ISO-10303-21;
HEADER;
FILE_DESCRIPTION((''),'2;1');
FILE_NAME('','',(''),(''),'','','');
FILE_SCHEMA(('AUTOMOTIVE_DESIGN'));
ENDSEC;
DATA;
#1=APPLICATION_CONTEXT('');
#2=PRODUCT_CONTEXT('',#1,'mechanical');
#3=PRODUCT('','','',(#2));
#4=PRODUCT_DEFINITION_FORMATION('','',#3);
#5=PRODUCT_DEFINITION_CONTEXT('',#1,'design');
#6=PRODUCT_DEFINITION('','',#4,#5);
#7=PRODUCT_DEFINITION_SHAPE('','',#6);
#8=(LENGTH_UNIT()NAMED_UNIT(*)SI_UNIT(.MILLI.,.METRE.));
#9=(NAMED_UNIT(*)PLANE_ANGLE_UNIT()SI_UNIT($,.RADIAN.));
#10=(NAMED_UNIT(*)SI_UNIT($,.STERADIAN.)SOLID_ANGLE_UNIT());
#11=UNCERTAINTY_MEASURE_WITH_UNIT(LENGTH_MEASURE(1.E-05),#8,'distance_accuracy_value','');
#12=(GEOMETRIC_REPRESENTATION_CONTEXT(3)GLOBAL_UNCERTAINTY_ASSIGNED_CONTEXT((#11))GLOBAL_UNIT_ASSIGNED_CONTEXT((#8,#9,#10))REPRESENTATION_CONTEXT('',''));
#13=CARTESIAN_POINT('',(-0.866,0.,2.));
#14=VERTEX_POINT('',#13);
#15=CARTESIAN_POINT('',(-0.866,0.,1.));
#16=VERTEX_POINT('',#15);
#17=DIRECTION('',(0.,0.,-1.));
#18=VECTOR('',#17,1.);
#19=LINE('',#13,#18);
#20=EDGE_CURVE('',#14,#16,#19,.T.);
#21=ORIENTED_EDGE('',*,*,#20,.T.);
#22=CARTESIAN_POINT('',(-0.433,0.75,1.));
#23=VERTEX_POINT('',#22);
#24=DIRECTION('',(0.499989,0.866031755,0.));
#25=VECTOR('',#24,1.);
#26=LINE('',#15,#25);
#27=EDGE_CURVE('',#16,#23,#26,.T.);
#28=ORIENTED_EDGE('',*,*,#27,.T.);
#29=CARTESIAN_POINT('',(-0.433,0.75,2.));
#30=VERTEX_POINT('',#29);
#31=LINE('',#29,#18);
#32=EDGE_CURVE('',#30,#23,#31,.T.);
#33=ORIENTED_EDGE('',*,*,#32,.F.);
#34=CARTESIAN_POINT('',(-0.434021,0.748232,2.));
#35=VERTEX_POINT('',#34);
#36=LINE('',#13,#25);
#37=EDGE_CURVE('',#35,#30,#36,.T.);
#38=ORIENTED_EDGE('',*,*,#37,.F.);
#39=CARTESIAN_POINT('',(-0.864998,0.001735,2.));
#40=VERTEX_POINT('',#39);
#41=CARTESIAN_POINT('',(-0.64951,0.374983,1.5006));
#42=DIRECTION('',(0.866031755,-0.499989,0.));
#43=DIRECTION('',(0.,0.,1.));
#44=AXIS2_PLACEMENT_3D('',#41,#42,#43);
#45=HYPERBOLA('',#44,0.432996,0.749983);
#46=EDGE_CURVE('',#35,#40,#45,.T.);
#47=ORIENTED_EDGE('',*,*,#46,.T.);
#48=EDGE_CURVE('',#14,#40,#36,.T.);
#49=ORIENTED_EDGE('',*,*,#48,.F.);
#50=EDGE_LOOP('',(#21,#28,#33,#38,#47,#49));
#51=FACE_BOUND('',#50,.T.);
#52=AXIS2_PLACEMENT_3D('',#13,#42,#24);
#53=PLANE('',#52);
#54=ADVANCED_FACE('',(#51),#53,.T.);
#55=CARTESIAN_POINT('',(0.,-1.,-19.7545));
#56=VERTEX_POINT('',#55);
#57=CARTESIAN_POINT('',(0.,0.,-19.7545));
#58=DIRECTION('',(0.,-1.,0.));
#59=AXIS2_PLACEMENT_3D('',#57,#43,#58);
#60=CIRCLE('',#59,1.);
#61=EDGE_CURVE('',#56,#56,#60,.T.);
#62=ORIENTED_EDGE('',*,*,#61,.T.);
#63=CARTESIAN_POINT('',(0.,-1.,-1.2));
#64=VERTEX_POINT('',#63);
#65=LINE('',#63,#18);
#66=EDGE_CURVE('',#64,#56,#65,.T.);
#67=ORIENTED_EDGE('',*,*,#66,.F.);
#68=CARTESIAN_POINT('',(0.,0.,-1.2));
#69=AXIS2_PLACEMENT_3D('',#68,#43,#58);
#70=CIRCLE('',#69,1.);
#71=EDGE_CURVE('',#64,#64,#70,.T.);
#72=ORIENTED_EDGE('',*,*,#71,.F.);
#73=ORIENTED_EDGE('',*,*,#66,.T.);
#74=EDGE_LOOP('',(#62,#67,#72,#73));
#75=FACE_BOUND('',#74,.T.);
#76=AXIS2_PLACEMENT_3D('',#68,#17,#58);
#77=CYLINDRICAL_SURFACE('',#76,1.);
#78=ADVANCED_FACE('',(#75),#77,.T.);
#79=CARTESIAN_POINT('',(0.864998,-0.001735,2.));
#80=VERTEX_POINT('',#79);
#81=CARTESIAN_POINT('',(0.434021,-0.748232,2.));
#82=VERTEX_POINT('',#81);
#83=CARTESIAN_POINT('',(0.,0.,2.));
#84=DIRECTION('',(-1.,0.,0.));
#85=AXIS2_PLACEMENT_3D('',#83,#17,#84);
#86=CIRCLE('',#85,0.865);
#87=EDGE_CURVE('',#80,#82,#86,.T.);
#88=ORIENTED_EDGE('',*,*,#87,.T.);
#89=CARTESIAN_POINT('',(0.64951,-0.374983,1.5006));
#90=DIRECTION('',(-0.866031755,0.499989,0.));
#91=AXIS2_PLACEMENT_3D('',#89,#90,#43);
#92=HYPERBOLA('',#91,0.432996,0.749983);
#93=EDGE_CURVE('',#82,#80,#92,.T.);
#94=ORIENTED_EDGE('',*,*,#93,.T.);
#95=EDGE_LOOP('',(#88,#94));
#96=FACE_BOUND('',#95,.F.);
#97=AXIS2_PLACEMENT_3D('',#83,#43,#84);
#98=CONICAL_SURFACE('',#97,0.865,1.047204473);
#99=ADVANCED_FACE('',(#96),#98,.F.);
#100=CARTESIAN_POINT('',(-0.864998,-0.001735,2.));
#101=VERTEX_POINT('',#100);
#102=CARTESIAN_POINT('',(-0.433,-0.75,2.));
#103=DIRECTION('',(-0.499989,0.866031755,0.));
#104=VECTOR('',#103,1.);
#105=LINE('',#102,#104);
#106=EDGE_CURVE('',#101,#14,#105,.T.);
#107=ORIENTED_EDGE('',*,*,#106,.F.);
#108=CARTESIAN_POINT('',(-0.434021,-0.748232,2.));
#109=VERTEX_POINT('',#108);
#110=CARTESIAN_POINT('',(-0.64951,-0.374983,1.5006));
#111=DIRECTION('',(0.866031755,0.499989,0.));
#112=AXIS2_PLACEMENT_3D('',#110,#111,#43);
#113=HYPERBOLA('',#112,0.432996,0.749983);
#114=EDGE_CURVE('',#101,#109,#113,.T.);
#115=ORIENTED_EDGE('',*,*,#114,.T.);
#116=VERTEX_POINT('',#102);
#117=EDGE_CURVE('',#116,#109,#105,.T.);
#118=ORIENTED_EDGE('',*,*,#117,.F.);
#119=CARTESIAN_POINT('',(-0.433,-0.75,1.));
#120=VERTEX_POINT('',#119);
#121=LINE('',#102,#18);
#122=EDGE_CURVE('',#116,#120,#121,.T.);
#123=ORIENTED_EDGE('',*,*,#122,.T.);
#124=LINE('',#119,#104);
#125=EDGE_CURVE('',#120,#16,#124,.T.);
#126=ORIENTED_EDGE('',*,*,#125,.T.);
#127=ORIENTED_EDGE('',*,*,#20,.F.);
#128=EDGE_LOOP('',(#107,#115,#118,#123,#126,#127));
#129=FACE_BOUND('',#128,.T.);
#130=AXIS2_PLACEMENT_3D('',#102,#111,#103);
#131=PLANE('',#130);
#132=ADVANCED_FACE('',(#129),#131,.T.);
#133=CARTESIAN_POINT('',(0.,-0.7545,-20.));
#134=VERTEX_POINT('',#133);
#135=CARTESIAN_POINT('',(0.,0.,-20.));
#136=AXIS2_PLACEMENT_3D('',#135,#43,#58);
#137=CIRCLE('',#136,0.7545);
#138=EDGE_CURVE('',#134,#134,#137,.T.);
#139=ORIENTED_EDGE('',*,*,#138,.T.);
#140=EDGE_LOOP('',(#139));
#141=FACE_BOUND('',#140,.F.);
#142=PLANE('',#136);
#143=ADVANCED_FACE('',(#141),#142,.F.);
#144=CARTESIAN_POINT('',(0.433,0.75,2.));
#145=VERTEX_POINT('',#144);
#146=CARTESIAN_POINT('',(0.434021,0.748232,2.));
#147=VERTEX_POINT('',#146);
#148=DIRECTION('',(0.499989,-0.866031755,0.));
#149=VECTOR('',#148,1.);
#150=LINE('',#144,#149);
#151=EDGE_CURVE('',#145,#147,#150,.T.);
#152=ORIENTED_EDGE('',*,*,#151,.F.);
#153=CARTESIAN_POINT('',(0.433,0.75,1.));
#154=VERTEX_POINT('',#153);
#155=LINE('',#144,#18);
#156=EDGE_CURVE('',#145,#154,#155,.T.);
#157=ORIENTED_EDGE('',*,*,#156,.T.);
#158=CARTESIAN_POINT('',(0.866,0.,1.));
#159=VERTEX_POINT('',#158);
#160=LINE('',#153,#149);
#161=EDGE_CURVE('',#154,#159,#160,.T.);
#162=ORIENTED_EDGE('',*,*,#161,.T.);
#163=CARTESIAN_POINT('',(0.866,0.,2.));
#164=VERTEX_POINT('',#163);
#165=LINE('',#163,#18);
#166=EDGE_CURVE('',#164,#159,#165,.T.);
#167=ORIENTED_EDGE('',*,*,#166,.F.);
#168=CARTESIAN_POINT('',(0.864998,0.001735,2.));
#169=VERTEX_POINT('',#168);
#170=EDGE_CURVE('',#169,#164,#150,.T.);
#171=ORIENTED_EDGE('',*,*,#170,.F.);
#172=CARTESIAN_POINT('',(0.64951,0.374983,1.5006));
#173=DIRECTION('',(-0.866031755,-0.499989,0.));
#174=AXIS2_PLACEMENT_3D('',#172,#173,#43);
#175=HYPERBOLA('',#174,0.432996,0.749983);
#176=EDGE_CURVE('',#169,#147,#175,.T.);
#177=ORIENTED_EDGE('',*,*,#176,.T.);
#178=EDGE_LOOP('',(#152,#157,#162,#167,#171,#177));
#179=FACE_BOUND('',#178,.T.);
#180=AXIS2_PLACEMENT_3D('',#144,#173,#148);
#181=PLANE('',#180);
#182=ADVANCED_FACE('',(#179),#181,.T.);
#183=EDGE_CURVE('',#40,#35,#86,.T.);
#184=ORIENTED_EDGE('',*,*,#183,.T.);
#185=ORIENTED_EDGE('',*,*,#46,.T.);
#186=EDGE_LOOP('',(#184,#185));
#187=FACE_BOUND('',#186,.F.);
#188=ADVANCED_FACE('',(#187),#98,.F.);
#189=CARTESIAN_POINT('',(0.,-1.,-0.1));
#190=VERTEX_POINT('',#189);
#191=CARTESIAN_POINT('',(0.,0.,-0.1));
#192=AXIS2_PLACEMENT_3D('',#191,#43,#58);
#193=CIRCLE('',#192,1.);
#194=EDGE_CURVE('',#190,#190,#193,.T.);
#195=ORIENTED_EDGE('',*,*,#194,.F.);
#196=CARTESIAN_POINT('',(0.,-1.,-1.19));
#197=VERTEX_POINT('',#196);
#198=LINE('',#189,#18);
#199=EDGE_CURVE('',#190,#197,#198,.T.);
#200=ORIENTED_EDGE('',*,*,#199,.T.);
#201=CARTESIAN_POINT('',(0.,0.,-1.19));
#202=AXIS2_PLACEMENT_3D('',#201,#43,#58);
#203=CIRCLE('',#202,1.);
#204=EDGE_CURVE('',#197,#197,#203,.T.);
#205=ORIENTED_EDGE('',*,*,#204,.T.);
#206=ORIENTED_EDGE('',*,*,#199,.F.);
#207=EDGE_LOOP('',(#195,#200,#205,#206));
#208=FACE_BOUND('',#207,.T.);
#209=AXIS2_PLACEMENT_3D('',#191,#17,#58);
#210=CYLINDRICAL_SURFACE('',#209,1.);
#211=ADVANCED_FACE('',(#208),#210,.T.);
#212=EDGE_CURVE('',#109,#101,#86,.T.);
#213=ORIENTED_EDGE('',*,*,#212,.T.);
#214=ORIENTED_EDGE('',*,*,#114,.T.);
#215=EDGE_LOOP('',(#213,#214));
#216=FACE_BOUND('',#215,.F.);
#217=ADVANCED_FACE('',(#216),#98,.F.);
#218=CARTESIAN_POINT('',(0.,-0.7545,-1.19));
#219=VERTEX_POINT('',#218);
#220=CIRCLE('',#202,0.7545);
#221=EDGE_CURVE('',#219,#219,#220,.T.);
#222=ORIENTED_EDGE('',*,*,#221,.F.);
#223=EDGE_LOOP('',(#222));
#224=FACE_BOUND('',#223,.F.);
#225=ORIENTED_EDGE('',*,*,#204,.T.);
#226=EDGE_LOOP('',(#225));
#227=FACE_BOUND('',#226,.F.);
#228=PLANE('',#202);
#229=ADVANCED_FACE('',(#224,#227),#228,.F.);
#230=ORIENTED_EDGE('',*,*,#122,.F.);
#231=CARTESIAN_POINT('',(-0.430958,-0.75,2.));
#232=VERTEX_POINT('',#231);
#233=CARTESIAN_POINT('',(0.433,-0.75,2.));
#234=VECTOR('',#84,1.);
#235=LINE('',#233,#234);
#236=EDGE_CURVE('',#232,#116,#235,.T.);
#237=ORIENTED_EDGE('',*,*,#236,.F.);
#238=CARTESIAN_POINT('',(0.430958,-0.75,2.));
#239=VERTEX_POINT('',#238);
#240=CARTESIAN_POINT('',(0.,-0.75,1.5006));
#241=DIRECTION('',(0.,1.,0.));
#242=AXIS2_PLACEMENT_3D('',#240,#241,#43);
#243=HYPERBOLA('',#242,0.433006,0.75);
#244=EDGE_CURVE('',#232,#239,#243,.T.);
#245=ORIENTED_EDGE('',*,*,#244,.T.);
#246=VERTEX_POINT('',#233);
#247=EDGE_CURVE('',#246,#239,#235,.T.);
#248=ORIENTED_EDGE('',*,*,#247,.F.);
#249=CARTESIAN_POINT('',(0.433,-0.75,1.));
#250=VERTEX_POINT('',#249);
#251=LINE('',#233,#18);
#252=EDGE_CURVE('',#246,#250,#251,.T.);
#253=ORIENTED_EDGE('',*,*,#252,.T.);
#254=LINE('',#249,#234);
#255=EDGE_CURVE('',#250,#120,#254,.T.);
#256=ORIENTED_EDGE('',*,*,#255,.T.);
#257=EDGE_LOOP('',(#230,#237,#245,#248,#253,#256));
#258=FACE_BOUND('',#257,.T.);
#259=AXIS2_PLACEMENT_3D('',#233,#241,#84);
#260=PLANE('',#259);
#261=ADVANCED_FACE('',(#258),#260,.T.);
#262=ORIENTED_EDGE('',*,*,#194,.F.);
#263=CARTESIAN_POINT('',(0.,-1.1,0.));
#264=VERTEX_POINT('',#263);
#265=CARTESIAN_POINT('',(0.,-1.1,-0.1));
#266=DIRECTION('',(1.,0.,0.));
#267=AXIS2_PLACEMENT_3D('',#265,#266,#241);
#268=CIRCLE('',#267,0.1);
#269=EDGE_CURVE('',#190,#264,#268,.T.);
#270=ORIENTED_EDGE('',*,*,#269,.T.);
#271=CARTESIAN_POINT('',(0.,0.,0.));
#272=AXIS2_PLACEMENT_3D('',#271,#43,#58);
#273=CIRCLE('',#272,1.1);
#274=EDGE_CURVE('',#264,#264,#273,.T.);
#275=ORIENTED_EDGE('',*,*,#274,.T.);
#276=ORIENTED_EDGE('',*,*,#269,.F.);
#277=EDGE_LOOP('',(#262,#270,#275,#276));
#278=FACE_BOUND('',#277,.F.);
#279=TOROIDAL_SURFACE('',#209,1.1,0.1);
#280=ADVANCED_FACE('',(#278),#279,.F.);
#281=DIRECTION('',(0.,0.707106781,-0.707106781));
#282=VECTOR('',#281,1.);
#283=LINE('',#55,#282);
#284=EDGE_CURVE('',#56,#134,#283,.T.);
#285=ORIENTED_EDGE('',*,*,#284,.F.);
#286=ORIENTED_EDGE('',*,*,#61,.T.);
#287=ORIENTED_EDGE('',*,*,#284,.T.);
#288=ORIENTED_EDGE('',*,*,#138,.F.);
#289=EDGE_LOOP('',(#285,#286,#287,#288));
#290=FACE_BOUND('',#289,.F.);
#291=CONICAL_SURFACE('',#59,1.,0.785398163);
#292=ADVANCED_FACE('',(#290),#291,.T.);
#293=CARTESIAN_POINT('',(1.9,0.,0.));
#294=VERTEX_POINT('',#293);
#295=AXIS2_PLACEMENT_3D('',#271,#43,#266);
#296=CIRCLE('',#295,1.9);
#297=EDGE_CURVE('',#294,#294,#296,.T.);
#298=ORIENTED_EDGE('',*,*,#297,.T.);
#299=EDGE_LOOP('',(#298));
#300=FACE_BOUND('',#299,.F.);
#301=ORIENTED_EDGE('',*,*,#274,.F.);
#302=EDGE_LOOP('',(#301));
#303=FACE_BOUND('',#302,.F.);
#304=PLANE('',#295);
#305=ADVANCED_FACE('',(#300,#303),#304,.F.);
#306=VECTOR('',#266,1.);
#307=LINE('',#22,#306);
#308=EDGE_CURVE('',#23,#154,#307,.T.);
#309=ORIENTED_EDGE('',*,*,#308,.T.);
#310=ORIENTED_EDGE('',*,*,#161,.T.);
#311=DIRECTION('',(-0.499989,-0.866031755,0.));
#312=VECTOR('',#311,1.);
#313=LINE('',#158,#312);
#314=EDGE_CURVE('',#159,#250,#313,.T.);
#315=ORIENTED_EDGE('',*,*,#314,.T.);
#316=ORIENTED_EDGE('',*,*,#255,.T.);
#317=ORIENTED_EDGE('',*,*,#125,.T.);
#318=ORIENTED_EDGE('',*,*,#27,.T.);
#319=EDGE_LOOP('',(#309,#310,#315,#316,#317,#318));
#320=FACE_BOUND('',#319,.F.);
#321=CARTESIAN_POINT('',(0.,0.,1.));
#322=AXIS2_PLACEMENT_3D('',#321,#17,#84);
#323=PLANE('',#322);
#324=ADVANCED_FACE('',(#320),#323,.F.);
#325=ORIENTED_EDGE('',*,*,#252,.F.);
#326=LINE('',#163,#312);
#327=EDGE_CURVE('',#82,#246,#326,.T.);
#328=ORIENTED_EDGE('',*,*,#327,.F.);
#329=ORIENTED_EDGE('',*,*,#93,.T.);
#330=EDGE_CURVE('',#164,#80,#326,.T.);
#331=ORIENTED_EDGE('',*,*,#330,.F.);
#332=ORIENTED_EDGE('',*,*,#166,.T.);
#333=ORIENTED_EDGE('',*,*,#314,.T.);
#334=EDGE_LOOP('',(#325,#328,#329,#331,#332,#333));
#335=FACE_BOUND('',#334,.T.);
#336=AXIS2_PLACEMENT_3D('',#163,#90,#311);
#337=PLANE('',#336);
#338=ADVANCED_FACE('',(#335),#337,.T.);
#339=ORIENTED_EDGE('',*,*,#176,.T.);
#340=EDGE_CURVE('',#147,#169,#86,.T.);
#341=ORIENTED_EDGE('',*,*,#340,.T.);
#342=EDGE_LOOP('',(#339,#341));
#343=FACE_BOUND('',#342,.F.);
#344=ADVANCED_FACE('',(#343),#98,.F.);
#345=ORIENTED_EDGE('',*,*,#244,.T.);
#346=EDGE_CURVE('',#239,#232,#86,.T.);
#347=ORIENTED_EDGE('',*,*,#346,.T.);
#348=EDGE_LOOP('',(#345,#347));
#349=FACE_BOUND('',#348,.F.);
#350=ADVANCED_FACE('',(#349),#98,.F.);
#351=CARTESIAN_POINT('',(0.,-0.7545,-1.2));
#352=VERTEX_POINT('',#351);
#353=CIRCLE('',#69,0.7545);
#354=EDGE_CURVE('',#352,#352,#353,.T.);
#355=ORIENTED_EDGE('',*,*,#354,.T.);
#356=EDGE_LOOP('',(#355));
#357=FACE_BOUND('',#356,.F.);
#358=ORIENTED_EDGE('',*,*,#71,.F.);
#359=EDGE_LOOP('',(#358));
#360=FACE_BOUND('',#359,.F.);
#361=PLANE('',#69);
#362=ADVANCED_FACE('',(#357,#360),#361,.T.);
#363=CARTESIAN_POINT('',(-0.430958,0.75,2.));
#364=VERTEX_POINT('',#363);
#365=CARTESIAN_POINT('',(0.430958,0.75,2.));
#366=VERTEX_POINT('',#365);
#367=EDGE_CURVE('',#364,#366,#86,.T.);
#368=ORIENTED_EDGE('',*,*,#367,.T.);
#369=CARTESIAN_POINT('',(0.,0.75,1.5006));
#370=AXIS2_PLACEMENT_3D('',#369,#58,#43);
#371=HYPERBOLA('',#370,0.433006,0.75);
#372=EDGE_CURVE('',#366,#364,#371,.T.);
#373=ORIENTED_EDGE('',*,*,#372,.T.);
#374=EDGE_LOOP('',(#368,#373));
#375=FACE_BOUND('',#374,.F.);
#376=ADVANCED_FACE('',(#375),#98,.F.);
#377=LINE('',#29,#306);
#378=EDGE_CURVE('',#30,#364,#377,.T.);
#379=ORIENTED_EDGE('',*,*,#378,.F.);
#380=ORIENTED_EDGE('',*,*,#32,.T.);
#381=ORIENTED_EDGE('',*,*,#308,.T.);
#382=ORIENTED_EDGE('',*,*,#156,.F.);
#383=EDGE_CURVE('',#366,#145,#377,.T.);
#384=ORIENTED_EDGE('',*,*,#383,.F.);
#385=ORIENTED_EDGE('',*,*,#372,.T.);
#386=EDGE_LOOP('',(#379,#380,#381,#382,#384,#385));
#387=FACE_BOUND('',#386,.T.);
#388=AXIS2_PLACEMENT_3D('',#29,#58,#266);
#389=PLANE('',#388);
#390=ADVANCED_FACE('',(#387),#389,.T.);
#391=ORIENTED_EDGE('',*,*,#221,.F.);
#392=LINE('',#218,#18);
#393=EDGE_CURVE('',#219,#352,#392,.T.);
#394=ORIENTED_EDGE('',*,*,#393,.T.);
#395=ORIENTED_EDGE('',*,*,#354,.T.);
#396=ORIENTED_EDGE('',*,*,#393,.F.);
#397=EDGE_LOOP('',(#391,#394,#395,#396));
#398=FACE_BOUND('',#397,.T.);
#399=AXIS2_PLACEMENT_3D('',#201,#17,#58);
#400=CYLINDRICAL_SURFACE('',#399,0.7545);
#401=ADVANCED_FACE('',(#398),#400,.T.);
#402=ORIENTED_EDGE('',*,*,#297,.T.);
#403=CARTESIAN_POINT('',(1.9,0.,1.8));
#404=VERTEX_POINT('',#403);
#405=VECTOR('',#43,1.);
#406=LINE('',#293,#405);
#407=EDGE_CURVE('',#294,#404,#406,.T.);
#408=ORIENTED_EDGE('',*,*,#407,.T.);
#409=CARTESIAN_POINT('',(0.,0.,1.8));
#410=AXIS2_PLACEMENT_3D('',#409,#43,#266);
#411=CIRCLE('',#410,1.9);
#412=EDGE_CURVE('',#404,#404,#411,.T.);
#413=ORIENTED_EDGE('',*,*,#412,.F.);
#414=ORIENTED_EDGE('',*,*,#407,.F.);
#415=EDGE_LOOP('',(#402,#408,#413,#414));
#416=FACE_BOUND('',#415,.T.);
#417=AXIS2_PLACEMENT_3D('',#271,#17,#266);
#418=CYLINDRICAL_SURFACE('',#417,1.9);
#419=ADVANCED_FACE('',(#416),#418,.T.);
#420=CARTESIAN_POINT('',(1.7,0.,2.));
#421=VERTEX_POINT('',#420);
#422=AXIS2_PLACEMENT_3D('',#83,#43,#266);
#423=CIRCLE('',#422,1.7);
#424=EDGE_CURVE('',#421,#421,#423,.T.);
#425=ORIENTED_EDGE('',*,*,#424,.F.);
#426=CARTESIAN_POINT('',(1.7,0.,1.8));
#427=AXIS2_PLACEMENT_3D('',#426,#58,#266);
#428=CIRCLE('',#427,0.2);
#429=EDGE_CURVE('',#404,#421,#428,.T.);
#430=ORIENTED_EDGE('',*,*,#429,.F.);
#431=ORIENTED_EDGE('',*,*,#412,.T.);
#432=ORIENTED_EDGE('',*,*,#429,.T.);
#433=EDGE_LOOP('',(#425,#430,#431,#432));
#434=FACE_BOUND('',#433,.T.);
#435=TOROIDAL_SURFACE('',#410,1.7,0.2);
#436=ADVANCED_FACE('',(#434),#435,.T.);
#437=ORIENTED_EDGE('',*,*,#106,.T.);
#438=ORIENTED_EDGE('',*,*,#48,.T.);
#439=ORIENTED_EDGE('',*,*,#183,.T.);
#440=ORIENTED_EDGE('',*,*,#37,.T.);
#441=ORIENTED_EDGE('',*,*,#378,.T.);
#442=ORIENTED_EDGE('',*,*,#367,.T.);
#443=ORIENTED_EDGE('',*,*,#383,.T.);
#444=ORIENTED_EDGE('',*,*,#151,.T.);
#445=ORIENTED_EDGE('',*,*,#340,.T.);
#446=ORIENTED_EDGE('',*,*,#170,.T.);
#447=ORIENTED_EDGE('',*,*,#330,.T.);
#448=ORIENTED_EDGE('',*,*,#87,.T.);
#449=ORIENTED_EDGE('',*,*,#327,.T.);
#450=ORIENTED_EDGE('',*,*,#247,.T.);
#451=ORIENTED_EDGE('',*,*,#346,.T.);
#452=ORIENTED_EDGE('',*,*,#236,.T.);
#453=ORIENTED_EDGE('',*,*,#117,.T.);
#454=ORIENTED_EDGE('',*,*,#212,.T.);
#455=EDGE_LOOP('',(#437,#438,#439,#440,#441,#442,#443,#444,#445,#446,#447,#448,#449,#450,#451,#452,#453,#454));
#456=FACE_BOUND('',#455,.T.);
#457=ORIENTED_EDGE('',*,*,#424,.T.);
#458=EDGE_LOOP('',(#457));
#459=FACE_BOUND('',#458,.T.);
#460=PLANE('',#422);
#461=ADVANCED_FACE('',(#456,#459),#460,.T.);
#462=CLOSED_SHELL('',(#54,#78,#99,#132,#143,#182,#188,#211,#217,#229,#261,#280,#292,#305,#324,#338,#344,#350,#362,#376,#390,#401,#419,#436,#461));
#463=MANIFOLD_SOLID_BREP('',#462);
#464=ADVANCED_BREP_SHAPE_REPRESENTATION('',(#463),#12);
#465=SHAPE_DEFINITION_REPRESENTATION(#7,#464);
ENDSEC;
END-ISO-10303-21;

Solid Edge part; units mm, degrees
sketch "Sketch1" plane through (0, 0, 0) normal (0, 0, 1) x (1, 0, 0)
  circle A0 centre (0, 0) radius 1.9
extrude "Protrusion1" add sketch "Sketch1" along normal blind 2
sketch "Sketch2" plane through (0, 0, 2) normal (0, 0, 1) x (0, 1, 0)
  line L0 (0, 0.866) -> (0.75, 0.433)
  line L1 (0.75, 0.433) -> (0.75, -0.433)
  line L2 (0.75, -0.433) -> (0, -0.866)
  line L3 (0, -0.866) -> (-0.75, -0.433)
  line L4 (-0.75, -0.433) -> (-0.75, 0.433)
  line L5 (-0.75, 0.433) -> (0, 0.866)
extrude "Cutout1" cut sketch "Sketch2" against normal blind 1
fillet "Round1" radius 0.2 1 edges at (-1.9, 0, 2)
sketch "Sketch3" plane through (0, 0, 0) normal (1, 0, 0) x (0, 1, 0)
  line L0 (-0.7545, -20) -> (0, -20)
  line L1 (-1, -19.7545) -> (-0.7545, -20)
  line L2 (-1, -1.2) -> (-1, -19.7545)
  line L3 (-0.7545, -1.2) -> (-1, -1.2)
  line L4 (-0.7545, -1.19) -> (-0.7545, -1.2)
  line L5 (-1, -1.19) -> (-0.7545, -1.19)
  line L6 (-1, -0.1) -> (-1, -1.19)
  arc A0 (-1, -0.1) -> (-1.1, 0) centre (-1.1, -0.1) ccw
  dimension "D1" = 1.2
  dimension "D2" = 0.01
  dimension "D3" = 0.1
  dimension "D4" = 20
revolve "RevolvedProtrusion1" add sketch "Sketch3" angle 360 about axis through (0, 0, -60.325) along (0, 0, 1) material side at (0, -0.3772, -19.95)
cosmetic_thread "Thread1" size "M2"
sketch "Sketch4" plane through (0, 0, 0) normal (0, -1, 0) x (1, 0, 0)
  line L0 (-0.865, 2) -> (0, 1.5006)
revolve "RevolvedCutout1" cut sketch "Sketch4" angle 360 about axis through (0, 0, 57.15) along (0, 0, -1) material side at (-0.4075, 0, 1.7936)
properties material "Stahl"
